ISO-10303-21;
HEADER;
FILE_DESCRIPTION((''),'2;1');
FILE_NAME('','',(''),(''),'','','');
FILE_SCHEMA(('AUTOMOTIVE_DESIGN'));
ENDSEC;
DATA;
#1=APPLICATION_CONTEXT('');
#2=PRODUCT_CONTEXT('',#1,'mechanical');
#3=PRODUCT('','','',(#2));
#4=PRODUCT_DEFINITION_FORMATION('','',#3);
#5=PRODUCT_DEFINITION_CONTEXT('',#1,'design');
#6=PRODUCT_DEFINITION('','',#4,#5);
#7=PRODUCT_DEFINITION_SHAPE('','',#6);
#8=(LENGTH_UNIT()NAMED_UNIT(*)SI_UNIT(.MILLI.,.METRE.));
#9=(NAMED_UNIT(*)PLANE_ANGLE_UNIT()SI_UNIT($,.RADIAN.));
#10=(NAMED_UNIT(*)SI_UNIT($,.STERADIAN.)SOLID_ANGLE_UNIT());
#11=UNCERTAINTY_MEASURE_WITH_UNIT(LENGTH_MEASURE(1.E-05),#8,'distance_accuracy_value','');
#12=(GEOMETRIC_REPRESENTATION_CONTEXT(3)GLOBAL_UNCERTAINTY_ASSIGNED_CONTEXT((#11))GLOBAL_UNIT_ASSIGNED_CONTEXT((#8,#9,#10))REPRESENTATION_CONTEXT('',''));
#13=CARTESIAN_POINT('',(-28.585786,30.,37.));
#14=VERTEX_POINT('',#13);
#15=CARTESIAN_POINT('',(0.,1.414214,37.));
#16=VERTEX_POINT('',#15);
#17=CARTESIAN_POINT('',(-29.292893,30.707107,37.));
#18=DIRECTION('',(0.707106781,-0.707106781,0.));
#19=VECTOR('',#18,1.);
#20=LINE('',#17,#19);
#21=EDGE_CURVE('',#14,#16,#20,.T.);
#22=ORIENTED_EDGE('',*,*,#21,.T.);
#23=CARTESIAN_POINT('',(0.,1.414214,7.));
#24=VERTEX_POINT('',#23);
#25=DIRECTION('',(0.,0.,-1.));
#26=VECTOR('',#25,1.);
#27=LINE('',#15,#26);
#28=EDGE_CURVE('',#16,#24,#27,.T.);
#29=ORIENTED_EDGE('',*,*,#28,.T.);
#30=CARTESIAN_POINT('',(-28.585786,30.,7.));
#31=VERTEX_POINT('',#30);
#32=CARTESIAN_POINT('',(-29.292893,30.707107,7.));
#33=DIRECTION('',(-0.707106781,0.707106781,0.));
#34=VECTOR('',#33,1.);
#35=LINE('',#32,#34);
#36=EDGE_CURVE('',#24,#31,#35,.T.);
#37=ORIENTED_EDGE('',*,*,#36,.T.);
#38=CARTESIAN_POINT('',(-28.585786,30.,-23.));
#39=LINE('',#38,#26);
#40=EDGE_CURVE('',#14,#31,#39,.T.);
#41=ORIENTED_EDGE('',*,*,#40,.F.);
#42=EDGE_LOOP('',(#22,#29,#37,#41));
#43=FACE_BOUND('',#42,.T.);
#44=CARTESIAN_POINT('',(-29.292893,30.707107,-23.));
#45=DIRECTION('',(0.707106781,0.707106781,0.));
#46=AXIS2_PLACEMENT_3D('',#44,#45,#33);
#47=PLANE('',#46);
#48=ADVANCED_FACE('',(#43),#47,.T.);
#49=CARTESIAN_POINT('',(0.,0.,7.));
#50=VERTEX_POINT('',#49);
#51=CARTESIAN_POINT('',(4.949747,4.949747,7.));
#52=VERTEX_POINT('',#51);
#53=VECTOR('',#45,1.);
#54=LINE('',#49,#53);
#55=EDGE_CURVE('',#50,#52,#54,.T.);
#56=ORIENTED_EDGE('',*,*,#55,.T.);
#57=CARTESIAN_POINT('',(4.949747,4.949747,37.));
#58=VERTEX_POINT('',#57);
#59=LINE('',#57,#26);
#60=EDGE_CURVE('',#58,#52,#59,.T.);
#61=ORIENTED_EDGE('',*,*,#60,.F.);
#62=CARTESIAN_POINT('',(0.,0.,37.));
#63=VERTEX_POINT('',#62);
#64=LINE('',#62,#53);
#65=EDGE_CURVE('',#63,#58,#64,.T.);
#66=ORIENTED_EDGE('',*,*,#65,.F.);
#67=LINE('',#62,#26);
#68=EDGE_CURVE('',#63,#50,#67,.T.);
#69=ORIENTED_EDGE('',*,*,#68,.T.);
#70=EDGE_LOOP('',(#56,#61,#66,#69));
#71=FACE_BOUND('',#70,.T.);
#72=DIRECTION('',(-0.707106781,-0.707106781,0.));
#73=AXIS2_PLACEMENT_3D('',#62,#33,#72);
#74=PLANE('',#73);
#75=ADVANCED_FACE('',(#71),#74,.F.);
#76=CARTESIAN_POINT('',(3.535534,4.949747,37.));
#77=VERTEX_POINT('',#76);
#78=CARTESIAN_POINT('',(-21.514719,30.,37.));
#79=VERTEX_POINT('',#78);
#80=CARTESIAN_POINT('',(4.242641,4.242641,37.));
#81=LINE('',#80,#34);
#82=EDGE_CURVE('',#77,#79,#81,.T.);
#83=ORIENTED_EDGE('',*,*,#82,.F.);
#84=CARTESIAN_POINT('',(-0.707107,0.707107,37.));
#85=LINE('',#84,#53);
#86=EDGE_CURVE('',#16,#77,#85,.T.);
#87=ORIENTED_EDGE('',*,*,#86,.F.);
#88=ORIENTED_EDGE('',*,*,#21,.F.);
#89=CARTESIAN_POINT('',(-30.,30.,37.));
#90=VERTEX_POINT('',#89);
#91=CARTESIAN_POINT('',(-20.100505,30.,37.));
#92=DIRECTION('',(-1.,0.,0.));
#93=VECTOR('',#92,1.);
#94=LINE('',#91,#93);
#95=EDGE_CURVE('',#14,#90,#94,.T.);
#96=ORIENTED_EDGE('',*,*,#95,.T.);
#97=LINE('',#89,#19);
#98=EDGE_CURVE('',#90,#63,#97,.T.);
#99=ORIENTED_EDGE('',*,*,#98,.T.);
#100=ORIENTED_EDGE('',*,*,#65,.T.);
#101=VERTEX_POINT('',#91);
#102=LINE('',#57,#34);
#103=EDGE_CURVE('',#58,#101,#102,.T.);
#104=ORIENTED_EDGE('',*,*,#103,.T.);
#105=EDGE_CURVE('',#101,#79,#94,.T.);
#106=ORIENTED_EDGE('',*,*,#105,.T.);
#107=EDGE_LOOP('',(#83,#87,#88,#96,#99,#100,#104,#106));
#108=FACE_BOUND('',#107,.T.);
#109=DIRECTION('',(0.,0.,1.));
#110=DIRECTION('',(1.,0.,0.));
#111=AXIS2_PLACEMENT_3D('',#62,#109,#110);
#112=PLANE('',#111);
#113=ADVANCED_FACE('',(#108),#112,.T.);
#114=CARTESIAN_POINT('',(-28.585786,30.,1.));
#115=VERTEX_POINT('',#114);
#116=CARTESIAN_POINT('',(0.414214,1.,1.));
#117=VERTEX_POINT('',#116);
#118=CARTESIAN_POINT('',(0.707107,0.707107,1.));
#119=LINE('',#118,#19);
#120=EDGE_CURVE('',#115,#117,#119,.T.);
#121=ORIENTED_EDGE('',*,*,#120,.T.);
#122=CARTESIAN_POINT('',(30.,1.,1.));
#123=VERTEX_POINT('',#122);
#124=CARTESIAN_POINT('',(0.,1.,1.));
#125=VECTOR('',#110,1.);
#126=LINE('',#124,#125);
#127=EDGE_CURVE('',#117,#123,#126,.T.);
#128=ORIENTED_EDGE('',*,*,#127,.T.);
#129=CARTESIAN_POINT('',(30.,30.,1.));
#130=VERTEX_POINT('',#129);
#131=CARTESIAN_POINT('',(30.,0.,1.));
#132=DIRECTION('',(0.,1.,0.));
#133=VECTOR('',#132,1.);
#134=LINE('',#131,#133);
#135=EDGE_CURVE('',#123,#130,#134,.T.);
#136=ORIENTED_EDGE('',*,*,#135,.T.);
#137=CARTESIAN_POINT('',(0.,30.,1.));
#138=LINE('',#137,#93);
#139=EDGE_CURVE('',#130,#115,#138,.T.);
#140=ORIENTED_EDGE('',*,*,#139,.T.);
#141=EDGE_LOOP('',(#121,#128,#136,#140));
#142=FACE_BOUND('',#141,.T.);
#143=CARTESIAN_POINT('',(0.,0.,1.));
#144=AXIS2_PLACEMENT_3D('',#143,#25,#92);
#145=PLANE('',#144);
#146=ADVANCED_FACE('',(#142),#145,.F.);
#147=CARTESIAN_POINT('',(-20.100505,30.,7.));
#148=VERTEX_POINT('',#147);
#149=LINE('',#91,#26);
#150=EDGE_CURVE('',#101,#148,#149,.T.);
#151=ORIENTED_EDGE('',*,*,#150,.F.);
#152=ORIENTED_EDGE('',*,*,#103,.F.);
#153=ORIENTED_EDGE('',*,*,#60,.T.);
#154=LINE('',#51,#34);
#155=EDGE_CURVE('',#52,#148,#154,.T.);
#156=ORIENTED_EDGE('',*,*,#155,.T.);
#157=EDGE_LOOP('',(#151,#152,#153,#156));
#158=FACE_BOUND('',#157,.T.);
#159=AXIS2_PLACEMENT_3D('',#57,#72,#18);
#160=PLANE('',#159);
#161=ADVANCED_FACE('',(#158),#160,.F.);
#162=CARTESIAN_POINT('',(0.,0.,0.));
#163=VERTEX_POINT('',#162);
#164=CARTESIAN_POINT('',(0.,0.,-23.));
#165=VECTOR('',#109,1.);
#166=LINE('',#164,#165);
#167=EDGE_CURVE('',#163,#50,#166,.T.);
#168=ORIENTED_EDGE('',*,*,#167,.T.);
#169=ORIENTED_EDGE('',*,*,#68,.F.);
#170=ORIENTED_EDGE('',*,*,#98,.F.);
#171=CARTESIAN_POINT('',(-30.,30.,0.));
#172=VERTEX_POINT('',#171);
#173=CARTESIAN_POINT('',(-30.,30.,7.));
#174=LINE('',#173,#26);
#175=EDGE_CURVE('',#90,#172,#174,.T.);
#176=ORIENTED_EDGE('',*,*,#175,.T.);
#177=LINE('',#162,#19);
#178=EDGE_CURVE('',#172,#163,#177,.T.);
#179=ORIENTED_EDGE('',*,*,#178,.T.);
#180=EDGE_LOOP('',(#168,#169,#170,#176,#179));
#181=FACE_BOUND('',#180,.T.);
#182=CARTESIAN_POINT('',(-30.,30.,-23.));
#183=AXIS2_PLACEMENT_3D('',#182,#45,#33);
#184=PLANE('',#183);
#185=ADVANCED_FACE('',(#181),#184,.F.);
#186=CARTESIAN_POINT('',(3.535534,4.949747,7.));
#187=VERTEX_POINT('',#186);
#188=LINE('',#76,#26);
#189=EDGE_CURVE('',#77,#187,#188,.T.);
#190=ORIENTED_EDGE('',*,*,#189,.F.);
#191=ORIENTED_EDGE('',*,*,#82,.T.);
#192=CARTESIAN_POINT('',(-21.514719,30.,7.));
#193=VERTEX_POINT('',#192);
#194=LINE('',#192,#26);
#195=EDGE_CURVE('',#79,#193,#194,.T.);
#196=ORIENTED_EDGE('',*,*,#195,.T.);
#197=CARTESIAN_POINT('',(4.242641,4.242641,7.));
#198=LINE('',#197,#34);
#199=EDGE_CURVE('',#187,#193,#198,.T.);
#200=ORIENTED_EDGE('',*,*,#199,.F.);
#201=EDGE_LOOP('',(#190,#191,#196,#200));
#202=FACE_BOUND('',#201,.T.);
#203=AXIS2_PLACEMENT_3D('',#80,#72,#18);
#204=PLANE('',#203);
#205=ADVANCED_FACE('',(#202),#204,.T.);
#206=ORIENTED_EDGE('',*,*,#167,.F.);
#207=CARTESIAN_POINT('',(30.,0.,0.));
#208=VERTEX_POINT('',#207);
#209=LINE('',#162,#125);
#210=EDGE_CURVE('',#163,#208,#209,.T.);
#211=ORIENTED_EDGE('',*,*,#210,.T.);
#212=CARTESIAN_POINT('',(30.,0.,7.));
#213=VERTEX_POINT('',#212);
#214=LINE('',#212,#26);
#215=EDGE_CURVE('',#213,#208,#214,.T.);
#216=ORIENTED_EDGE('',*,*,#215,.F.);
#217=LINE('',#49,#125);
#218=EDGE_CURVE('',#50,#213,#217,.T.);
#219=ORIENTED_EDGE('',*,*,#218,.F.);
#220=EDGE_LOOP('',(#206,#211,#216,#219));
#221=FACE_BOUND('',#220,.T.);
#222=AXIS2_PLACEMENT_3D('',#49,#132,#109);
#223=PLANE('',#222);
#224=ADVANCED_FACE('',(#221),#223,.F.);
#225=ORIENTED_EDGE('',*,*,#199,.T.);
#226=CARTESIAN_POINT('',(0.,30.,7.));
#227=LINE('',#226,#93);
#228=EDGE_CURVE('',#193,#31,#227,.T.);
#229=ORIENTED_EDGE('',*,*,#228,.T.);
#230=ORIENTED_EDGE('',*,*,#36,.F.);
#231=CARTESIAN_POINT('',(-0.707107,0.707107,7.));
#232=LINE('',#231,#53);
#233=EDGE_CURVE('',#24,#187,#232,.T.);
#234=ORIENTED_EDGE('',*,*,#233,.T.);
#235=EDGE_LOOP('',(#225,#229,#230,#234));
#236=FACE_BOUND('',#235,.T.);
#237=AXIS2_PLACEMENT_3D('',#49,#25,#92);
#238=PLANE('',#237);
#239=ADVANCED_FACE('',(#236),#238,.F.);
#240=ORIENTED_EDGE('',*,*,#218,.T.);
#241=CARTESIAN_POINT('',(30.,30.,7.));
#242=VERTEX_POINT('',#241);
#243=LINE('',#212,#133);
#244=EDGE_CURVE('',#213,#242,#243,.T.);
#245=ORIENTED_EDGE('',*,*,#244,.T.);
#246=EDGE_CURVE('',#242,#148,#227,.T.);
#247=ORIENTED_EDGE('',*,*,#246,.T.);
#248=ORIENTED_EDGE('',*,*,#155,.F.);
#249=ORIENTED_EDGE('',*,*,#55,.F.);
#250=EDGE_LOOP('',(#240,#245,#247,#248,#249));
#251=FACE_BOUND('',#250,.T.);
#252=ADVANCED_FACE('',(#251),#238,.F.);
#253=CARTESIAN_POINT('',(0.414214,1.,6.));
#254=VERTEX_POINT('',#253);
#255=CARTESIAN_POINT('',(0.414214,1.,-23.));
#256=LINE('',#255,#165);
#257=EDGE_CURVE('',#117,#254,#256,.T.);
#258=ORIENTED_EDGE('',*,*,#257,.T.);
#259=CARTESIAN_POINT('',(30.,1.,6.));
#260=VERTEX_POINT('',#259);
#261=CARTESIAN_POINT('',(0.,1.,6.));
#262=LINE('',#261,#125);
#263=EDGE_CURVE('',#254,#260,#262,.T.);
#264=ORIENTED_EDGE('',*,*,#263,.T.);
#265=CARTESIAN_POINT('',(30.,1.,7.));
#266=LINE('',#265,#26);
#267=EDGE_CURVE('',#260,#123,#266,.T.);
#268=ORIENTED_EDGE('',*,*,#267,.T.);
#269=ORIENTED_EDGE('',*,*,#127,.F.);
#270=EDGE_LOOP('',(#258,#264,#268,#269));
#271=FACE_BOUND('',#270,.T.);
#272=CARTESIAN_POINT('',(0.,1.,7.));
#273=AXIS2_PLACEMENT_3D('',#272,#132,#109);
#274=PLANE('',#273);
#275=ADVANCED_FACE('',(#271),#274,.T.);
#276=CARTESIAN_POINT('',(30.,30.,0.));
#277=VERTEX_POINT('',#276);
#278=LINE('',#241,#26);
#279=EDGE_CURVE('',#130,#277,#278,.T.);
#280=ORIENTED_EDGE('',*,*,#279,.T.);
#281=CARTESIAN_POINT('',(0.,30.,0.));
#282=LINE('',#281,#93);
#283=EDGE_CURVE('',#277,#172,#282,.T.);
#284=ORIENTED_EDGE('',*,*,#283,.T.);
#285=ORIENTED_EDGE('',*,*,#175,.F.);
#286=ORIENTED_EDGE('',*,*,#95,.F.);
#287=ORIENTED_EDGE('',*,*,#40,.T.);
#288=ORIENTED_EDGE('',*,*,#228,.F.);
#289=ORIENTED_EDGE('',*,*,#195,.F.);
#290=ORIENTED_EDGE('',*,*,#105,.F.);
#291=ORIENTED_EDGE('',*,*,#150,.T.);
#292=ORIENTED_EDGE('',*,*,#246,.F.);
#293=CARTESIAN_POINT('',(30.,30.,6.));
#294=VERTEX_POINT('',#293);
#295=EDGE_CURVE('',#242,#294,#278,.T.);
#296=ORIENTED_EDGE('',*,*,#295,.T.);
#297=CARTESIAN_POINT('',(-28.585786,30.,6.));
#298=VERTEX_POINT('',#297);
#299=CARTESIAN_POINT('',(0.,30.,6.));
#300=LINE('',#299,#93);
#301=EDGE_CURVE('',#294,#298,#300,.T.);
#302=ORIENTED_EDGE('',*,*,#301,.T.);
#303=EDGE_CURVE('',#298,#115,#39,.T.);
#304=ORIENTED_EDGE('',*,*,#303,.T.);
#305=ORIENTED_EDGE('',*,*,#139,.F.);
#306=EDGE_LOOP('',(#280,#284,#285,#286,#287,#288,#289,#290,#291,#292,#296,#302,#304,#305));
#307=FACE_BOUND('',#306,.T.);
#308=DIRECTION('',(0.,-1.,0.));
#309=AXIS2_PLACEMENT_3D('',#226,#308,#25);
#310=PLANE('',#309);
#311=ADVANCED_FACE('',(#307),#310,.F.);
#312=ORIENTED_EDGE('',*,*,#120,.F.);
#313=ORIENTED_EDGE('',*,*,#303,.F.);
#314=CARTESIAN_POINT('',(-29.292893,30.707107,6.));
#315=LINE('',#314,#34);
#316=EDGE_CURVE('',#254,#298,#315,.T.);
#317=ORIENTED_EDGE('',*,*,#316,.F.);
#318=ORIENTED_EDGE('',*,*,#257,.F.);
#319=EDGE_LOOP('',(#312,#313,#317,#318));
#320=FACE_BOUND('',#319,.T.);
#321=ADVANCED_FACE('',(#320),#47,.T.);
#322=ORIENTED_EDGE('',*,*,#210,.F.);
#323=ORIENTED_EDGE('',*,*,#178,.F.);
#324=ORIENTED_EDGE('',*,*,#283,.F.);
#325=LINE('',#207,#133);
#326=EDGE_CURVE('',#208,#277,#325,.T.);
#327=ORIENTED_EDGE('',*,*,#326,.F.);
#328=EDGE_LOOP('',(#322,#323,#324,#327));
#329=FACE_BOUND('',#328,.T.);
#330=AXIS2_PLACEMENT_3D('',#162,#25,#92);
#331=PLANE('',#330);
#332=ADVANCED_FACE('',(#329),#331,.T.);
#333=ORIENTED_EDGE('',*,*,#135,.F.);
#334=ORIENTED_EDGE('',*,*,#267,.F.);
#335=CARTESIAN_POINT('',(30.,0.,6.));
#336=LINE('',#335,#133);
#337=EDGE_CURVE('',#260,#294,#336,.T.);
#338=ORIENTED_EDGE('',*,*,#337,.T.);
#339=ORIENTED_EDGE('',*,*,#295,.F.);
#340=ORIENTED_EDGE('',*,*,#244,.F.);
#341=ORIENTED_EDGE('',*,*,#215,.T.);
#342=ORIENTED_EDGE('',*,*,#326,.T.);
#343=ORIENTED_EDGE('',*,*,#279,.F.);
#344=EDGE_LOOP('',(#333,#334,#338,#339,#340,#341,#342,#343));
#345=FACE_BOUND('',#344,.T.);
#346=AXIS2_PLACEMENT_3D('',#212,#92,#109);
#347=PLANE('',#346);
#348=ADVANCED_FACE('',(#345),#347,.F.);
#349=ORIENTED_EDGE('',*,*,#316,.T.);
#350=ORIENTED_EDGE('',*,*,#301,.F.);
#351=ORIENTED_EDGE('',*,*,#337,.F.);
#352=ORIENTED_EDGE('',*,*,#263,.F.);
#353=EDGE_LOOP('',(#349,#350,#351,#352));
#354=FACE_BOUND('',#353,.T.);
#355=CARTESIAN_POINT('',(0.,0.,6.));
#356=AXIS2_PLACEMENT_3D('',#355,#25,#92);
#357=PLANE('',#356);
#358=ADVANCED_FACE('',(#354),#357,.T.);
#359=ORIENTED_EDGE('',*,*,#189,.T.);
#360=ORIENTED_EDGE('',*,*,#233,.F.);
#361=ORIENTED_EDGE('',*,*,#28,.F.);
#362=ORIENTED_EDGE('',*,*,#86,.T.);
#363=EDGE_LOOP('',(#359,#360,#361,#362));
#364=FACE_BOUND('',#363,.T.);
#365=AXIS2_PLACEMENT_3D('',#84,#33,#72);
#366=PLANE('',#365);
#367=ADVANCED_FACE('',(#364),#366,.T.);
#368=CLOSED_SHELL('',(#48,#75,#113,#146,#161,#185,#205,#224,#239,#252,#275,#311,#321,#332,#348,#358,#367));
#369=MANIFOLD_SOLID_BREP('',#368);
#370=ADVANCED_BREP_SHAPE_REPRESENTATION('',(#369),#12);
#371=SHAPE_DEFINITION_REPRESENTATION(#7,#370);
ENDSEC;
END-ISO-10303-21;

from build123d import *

# Parameters (mm, degrees)
SKETCH1_W           = 30
SKETCH1_H           = 30
BOSS_EXTRUDE1_DEPTH = 7
SKETCH2_W           = 7
SKETCH2_H           = 30
BOSS_EXTRUDE2_DEPTH = 30
CUT_EXTRUDE1_DEPTH  = 30
SHELL1_T            = -1
BOSS_EXTRUDE3_DEPTH = 30
SHELL2_START        = 7
SHELL2_DEPTH        = 30


# Read off the part's stored shape, not the designer's step: Shell2
with BuildPart() as part:
    # Sketch1 → Boss-Extrude1 (new body)
    with BuildSketch(Plane.XY):
        with Locations((15, 15)):
            Rectangle(SKETCH1_W, SKETCH1_H)
    extrude(amount=BOSS_EXTRUDE1_DEPTH)

    # Sketch2 → Boss-Extrude2 (add)
    with BuildSketch(Plane.ZY):
        with Locations((3.5, 15)):
            Rectangle(SKETCH2_W, SKETCH2_H)
    extrude(amount=BOSS_EXTRUDE2_DEPTH)

    # Sketch3 → Cut-Extrude1 (cut)
    with BuildSketch(Plane.XY.offset(7)):
        Polygon((-30, 30), (0, 0), (-30, 0), align=None)
    extrude(amount=-CUT_EXTRUDE1_DEPTH, mode=Mode.SUBTRACT)

    # Shell1
    shell1_openings = [part.faces().sort_by_distance(p)[0] for p in [
        (0, 30, 3.5),
        (30, 15, 3.5),
    ]]
    offset(amount=SHELL1_T, openings=shell1_openings, kind=Kind.INTERSECTION)

    # Sketch6 → Boss-Extrude3 (add)
    with BuildSketch(Plane.XY.offset(7)):
        Polygon((0, 0), (4.949747468, 4.949747468), (-20.100505063, 30), (-30, 30), align=None)
    extrude(amount=BOSS_EXTRUDE3_DEPTH)

    # Shell2 outline → Shell2 (cut)
    with BuildSketch(Plane.XY.offset(SHELL2_START)):
        Polygon((-28.585786438, 30), (0, 1.414213562), (3.535533906, 4.949747468), (-21.514718626, 30), align=None)
    extrude(amount=SHELL2_DEPTH, mode=Mode.SUBTRACT)


solid = part.part
